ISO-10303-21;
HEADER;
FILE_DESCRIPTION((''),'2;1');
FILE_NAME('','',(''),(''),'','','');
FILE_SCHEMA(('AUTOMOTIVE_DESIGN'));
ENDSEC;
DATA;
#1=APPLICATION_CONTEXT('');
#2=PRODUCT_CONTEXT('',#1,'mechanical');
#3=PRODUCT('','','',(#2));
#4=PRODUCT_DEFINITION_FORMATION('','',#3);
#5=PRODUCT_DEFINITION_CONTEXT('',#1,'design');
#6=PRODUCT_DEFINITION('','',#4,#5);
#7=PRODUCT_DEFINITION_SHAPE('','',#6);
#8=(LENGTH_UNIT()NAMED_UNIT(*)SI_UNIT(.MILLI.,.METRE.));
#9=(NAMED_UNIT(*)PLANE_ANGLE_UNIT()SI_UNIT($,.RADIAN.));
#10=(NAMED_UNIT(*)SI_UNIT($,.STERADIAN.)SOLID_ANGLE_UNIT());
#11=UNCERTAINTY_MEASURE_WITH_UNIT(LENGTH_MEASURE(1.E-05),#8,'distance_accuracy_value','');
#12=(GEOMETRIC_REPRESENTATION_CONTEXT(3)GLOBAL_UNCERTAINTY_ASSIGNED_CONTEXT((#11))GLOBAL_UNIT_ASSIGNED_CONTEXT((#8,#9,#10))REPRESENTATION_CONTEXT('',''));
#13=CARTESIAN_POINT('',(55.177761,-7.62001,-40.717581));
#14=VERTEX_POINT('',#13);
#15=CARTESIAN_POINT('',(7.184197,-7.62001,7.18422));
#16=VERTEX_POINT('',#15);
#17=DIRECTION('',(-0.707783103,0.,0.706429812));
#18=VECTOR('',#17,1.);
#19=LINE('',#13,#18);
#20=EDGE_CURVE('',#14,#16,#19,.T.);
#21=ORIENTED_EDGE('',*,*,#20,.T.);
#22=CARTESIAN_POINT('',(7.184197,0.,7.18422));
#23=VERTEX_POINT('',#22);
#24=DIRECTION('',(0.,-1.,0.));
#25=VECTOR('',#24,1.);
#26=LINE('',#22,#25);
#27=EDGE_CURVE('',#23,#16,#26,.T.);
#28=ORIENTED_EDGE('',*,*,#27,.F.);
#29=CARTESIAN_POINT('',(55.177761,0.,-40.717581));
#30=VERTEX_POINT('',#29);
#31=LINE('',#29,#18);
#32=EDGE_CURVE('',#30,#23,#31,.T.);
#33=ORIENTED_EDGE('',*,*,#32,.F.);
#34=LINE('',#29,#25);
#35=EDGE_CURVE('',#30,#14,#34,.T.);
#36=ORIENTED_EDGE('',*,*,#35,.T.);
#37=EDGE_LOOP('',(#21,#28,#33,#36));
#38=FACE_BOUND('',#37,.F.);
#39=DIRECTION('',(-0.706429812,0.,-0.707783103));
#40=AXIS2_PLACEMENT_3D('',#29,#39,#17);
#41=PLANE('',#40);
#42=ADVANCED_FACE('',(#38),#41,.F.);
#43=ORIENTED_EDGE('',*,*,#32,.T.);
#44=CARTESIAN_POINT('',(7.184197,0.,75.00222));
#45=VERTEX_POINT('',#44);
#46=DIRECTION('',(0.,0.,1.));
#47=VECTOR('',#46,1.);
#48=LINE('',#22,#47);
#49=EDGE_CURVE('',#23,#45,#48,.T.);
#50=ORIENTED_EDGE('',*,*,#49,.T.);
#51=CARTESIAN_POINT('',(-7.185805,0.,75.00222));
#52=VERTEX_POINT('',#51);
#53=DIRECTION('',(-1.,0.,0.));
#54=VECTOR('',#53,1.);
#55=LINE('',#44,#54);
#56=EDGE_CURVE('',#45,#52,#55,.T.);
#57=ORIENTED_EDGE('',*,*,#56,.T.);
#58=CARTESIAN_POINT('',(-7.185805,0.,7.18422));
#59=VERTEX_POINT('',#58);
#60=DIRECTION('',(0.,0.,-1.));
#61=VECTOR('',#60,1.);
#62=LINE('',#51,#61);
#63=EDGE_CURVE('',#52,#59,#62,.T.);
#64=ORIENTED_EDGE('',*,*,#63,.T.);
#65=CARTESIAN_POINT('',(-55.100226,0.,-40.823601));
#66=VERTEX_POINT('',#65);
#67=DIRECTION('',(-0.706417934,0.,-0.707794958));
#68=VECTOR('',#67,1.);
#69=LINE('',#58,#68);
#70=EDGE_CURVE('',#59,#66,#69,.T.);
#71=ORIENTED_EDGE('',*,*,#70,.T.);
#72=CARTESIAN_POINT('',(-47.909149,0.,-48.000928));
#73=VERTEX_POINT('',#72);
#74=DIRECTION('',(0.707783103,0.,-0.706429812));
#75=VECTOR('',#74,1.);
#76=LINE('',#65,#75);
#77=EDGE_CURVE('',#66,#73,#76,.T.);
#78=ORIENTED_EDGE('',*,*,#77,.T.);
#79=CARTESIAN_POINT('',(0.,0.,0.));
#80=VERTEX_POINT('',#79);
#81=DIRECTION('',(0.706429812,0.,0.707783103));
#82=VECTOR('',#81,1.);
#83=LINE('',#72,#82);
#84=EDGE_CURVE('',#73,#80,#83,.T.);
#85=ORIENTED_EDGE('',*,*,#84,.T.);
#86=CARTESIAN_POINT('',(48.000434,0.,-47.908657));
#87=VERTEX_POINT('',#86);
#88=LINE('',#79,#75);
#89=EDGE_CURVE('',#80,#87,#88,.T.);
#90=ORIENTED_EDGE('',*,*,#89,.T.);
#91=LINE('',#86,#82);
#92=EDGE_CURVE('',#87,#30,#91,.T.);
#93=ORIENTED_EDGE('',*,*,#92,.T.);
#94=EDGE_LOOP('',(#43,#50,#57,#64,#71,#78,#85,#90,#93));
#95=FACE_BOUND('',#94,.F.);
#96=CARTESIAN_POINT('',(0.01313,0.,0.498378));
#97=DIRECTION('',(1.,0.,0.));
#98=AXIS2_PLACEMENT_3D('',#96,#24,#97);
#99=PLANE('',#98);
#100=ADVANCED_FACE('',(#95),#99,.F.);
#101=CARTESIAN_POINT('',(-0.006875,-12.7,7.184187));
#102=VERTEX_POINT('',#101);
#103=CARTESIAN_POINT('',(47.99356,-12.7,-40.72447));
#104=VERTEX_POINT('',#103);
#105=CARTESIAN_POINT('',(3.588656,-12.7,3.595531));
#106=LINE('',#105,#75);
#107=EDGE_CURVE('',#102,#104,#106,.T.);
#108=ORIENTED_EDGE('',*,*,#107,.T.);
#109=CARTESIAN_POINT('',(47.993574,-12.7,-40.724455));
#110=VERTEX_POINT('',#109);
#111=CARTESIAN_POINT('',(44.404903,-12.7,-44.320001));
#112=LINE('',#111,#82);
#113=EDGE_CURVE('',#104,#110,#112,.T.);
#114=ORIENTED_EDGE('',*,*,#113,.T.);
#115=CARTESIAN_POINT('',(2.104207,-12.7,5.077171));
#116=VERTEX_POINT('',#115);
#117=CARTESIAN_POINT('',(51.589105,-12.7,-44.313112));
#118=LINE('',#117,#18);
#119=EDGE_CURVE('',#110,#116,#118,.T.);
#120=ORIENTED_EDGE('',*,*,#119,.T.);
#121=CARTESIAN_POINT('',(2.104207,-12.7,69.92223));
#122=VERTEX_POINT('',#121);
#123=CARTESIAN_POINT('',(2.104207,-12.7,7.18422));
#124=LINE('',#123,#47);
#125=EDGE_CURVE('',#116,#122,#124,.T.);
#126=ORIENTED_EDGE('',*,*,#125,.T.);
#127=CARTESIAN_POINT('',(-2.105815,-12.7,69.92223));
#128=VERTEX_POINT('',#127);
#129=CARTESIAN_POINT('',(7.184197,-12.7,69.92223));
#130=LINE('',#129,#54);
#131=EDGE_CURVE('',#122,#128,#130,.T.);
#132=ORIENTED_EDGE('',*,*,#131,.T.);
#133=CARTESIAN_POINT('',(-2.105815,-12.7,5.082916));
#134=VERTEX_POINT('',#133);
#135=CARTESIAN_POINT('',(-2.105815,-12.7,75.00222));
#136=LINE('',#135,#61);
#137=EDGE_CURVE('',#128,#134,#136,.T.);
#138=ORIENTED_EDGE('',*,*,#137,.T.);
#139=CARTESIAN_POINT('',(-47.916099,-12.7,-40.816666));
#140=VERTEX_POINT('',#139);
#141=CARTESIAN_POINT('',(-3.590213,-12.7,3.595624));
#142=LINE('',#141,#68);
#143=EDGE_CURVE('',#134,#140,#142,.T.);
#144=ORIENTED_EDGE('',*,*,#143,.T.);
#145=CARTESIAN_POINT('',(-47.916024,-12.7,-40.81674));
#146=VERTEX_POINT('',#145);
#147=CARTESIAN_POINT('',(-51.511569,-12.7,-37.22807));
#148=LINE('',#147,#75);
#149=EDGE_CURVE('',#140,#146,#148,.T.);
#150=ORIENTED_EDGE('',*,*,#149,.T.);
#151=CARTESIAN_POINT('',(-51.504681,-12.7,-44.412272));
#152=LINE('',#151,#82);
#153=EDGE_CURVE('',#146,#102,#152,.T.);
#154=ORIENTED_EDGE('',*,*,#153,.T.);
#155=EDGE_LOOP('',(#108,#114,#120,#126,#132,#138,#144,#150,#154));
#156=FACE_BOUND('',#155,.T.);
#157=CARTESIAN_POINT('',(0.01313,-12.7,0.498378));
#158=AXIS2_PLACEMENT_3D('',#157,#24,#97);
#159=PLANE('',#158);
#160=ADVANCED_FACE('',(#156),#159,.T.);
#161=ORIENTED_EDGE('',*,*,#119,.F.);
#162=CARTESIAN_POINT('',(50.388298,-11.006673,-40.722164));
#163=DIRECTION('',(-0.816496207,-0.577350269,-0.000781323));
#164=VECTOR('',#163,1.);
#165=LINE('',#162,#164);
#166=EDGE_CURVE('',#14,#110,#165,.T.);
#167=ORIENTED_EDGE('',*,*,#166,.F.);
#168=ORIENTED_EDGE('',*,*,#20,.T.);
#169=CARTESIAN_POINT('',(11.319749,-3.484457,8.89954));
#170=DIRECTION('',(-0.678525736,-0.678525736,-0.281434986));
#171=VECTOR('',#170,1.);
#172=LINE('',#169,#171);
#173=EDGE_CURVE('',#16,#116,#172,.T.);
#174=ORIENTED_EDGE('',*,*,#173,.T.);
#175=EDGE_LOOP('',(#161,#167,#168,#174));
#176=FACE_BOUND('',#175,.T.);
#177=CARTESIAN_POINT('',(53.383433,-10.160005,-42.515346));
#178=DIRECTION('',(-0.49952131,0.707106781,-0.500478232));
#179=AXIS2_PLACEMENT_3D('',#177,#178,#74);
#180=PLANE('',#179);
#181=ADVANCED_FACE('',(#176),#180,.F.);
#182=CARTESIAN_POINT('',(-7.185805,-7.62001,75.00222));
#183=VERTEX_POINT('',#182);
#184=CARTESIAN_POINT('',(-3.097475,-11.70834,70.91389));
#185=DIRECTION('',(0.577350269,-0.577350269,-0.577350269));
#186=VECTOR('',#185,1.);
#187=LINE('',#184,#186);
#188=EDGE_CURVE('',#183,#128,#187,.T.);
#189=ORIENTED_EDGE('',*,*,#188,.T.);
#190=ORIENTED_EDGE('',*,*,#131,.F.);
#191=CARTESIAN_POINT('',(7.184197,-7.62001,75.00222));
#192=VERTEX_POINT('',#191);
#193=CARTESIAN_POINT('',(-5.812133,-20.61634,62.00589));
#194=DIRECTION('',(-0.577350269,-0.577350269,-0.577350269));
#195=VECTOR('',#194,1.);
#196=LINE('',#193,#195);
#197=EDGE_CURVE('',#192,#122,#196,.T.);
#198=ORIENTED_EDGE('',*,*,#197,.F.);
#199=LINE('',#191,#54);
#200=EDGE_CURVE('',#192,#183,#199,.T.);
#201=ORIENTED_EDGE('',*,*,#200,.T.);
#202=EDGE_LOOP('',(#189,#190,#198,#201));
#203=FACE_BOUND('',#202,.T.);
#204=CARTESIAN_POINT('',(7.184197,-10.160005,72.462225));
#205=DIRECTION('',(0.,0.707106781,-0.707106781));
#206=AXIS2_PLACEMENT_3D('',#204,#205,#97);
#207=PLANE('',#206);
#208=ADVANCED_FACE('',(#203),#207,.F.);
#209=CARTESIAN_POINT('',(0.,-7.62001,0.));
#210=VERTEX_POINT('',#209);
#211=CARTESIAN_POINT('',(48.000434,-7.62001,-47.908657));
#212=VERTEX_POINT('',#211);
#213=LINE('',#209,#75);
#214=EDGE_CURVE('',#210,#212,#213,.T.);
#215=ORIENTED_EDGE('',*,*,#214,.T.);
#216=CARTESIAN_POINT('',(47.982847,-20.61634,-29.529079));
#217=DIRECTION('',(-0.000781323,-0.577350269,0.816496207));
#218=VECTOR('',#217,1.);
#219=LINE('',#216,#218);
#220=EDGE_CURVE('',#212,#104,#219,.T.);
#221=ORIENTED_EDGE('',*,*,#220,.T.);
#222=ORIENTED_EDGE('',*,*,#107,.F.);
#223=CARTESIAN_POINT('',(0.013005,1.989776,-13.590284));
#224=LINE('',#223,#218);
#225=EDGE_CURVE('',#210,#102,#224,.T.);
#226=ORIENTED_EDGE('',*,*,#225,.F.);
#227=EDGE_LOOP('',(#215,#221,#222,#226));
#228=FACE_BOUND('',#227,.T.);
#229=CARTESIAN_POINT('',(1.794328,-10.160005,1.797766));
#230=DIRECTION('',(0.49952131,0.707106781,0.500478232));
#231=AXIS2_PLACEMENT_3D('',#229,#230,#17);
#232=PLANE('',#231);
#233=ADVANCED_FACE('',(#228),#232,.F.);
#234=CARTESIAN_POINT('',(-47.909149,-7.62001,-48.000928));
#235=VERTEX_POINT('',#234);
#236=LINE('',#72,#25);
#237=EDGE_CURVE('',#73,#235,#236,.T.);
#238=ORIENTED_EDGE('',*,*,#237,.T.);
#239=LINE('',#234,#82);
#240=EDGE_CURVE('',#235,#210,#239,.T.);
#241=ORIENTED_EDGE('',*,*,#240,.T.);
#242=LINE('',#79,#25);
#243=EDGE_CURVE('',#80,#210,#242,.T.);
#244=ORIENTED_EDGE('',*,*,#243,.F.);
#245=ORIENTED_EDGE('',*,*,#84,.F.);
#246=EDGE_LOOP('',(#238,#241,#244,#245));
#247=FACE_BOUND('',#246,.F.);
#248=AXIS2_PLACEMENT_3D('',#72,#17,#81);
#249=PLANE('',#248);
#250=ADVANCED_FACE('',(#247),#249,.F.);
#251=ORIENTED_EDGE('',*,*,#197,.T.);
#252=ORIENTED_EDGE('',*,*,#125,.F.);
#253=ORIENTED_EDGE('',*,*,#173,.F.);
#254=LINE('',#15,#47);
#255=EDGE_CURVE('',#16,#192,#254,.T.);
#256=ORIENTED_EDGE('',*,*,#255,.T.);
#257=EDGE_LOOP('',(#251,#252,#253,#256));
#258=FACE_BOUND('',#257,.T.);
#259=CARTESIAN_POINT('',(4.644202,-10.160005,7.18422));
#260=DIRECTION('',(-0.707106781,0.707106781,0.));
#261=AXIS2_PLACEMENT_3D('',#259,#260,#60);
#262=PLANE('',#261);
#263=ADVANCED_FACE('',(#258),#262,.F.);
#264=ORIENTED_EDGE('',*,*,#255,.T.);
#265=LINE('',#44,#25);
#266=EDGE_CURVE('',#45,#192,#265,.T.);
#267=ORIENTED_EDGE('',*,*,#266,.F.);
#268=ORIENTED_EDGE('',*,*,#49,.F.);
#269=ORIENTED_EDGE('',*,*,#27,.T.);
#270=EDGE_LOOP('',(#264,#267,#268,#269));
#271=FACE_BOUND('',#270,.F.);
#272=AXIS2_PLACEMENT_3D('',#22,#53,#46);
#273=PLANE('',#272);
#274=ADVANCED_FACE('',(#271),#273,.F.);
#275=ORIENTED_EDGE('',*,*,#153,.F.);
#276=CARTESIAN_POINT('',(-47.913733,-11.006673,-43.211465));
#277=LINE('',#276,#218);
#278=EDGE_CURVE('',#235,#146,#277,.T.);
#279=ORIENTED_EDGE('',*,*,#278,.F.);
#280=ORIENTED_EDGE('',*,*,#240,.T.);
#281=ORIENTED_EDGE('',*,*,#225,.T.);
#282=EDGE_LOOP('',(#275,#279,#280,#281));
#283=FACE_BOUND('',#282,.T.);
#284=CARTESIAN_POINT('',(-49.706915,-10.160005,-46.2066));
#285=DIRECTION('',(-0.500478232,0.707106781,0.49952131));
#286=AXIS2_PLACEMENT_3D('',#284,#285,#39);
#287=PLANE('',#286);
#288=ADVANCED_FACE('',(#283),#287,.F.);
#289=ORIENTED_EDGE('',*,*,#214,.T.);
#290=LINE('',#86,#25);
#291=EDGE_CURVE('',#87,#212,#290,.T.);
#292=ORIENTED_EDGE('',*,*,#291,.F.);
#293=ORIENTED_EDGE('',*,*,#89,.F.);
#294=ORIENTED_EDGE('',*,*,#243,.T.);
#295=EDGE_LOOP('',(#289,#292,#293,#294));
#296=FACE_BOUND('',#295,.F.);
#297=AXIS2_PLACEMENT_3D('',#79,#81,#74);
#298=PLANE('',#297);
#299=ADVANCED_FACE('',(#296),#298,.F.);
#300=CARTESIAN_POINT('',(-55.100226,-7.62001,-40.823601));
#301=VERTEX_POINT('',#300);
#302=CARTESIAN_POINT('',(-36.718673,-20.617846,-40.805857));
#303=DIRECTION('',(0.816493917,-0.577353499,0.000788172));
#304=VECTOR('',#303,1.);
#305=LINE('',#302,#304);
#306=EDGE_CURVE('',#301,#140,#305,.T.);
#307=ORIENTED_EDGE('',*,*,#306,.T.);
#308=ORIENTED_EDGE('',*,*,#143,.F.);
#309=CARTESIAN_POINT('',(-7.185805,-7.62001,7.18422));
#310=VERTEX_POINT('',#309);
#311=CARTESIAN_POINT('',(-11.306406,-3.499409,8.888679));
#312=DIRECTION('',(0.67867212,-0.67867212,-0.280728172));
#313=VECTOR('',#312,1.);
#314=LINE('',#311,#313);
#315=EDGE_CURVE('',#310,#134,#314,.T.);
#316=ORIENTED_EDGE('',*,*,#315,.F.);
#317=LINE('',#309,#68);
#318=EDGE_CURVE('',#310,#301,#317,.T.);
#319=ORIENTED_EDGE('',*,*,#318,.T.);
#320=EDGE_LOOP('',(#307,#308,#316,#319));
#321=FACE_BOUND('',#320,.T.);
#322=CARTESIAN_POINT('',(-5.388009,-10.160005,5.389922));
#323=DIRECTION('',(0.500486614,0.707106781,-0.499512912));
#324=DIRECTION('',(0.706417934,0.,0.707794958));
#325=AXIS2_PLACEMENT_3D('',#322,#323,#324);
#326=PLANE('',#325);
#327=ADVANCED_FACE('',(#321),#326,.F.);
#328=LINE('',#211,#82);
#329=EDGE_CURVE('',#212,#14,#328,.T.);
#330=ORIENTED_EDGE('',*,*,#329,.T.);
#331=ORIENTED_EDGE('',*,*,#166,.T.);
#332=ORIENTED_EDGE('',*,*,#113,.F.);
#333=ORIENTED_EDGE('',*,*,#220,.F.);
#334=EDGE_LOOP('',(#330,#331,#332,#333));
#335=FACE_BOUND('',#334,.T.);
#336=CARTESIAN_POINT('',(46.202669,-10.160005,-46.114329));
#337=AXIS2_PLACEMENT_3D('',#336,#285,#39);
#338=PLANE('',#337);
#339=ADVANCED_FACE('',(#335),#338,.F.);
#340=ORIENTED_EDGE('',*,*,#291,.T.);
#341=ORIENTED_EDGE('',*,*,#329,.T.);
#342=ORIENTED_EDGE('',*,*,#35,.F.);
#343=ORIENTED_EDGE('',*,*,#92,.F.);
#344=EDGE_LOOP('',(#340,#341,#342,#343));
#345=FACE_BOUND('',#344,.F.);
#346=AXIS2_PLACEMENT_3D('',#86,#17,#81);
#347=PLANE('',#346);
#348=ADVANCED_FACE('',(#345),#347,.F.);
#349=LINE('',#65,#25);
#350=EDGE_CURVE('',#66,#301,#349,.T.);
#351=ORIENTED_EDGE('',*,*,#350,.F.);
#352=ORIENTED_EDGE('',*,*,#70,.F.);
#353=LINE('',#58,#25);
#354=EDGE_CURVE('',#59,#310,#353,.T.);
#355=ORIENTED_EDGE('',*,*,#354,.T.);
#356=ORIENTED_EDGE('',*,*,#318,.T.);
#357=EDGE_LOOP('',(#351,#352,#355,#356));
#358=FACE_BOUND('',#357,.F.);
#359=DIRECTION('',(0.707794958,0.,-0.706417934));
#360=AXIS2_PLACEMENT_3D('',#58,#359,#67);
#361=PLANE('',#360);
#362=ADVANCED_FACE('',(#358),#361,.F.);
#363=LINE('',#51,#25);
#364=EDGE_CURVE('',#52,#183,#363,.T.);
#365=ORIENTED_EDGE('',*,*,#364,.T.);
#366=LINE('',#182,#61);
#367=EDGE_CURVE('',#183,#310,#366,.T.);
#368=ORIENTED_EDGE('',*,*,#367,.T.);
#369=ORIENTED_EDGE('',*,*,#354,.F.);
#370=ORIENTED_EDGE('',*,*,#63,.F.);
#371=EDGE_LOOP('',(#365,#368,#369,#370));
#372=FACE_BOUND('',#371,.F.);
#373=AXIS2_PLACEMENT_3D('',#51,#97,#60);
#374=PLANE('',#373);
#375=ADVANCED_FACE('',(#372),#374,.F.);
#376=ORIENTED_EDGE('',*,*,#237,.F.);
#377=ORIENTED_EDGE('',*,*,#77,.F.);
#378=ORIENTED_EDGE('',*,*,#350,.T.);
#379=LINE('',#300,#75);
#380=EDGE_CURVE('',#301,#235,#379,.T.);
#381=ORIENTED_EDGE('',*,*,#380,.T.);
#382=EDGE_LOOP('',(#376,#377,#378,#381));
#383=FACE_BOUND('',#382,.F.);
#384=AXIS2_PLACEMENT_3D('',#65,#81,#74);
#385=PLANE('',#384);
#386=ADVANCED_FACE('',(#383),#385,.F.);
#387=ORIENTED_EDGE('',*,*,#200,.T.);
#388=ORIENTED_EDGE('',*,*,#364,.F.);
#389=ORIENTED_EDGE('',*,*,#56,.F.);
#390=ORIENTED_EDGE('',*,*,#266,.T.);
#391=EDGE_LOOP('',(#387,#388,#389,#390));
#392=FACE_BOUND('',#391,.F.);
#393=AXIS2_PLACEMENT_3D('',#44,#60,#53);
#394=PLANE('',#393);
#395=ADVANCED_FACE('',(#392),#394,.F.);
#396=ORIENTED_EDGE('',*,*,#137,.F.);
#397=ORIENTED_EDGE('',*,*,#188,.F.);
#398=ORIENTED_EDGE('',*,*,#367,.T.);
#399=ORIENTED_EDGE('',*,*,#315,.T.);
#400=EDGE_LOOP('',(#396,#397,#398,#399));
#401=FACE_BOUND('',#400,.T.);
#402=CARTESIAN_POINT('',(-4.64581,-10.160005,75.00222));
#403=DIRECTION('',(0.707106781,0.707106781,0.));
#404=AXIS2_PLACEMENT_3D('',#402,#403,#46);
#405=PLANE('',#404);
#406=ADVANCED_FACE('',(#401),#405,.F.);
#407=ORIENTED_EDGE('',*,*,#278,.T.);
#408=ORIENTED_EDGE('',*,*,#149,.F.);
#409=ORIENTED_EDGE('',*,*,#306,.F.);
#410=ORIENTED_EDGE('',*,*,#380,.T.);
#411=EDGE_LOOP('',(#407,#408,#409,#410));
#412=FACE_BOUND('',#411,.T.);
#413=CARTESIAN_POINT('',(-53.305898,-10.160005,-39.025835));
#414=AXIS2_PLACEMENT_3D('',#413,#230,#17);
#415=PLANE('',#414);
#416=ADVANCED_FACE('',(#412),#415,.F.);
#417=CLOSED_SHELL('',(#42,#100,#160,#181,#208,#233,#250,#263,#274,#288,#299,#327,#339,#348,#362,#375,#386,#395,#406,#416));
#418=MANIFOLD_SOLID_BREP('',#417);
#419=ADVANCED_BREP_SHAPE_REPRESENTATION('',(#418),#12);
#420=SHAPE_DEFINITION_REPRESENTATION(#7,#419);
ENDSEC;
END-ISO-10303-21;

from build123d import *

# Parameters (mm, degrees)
F1_DEPTH = 12.7
F2_SIZE  = 5.07999


# Not quite as in the source:
# - a fillet or chamfer is up to 0.001 mm smaller than in the source, because OpenCascade refuses the exact size


with BuildPart() as f1:
    # F0 (on Front) → F1 (new body)
    with BuildSketch(Plane.XZ):
        Polygon((-7.1858047352, 75.0022197947), (-7.1858047352, 7.1842197947), (-55.1002257696, -40.8236010231), (-47.909149441, -48.0009279096), (0, 0), (48.0004344931, -47.9086569679), (55.1777613797, -40.7175806394), (7.1841965553, 7.1842197947), (7.1841965553, 75.0022197947), align=None)
    extrude(amount=F1_DEPTH)

    # F2 (size 5.08 in the source; OpenCascade refuses exactly that, so slightly less here)
    f2_edges = [f1.edges().sort_by_distance(p)[0] for p in [
        (7.184197, -12.7, 41.09322),
        (-0.000804, -12.7, 75.00222),
        (-7.185805, -12.7, 41.09322),
        (-31.143015, -12.7, -16.819691),
        (-51.504688, -12.7, -44.412264),
        (-23.954575, -12.7, -24.000464),
        (24.000217, -12.7, -23.954328),
        (51.589098, -12.7, -44.313119),
        (31.180979, -12.7, -16.76668),
    ]]
    chamfer(f2_edges, length=F2_SIZE)


solid = f1.part
